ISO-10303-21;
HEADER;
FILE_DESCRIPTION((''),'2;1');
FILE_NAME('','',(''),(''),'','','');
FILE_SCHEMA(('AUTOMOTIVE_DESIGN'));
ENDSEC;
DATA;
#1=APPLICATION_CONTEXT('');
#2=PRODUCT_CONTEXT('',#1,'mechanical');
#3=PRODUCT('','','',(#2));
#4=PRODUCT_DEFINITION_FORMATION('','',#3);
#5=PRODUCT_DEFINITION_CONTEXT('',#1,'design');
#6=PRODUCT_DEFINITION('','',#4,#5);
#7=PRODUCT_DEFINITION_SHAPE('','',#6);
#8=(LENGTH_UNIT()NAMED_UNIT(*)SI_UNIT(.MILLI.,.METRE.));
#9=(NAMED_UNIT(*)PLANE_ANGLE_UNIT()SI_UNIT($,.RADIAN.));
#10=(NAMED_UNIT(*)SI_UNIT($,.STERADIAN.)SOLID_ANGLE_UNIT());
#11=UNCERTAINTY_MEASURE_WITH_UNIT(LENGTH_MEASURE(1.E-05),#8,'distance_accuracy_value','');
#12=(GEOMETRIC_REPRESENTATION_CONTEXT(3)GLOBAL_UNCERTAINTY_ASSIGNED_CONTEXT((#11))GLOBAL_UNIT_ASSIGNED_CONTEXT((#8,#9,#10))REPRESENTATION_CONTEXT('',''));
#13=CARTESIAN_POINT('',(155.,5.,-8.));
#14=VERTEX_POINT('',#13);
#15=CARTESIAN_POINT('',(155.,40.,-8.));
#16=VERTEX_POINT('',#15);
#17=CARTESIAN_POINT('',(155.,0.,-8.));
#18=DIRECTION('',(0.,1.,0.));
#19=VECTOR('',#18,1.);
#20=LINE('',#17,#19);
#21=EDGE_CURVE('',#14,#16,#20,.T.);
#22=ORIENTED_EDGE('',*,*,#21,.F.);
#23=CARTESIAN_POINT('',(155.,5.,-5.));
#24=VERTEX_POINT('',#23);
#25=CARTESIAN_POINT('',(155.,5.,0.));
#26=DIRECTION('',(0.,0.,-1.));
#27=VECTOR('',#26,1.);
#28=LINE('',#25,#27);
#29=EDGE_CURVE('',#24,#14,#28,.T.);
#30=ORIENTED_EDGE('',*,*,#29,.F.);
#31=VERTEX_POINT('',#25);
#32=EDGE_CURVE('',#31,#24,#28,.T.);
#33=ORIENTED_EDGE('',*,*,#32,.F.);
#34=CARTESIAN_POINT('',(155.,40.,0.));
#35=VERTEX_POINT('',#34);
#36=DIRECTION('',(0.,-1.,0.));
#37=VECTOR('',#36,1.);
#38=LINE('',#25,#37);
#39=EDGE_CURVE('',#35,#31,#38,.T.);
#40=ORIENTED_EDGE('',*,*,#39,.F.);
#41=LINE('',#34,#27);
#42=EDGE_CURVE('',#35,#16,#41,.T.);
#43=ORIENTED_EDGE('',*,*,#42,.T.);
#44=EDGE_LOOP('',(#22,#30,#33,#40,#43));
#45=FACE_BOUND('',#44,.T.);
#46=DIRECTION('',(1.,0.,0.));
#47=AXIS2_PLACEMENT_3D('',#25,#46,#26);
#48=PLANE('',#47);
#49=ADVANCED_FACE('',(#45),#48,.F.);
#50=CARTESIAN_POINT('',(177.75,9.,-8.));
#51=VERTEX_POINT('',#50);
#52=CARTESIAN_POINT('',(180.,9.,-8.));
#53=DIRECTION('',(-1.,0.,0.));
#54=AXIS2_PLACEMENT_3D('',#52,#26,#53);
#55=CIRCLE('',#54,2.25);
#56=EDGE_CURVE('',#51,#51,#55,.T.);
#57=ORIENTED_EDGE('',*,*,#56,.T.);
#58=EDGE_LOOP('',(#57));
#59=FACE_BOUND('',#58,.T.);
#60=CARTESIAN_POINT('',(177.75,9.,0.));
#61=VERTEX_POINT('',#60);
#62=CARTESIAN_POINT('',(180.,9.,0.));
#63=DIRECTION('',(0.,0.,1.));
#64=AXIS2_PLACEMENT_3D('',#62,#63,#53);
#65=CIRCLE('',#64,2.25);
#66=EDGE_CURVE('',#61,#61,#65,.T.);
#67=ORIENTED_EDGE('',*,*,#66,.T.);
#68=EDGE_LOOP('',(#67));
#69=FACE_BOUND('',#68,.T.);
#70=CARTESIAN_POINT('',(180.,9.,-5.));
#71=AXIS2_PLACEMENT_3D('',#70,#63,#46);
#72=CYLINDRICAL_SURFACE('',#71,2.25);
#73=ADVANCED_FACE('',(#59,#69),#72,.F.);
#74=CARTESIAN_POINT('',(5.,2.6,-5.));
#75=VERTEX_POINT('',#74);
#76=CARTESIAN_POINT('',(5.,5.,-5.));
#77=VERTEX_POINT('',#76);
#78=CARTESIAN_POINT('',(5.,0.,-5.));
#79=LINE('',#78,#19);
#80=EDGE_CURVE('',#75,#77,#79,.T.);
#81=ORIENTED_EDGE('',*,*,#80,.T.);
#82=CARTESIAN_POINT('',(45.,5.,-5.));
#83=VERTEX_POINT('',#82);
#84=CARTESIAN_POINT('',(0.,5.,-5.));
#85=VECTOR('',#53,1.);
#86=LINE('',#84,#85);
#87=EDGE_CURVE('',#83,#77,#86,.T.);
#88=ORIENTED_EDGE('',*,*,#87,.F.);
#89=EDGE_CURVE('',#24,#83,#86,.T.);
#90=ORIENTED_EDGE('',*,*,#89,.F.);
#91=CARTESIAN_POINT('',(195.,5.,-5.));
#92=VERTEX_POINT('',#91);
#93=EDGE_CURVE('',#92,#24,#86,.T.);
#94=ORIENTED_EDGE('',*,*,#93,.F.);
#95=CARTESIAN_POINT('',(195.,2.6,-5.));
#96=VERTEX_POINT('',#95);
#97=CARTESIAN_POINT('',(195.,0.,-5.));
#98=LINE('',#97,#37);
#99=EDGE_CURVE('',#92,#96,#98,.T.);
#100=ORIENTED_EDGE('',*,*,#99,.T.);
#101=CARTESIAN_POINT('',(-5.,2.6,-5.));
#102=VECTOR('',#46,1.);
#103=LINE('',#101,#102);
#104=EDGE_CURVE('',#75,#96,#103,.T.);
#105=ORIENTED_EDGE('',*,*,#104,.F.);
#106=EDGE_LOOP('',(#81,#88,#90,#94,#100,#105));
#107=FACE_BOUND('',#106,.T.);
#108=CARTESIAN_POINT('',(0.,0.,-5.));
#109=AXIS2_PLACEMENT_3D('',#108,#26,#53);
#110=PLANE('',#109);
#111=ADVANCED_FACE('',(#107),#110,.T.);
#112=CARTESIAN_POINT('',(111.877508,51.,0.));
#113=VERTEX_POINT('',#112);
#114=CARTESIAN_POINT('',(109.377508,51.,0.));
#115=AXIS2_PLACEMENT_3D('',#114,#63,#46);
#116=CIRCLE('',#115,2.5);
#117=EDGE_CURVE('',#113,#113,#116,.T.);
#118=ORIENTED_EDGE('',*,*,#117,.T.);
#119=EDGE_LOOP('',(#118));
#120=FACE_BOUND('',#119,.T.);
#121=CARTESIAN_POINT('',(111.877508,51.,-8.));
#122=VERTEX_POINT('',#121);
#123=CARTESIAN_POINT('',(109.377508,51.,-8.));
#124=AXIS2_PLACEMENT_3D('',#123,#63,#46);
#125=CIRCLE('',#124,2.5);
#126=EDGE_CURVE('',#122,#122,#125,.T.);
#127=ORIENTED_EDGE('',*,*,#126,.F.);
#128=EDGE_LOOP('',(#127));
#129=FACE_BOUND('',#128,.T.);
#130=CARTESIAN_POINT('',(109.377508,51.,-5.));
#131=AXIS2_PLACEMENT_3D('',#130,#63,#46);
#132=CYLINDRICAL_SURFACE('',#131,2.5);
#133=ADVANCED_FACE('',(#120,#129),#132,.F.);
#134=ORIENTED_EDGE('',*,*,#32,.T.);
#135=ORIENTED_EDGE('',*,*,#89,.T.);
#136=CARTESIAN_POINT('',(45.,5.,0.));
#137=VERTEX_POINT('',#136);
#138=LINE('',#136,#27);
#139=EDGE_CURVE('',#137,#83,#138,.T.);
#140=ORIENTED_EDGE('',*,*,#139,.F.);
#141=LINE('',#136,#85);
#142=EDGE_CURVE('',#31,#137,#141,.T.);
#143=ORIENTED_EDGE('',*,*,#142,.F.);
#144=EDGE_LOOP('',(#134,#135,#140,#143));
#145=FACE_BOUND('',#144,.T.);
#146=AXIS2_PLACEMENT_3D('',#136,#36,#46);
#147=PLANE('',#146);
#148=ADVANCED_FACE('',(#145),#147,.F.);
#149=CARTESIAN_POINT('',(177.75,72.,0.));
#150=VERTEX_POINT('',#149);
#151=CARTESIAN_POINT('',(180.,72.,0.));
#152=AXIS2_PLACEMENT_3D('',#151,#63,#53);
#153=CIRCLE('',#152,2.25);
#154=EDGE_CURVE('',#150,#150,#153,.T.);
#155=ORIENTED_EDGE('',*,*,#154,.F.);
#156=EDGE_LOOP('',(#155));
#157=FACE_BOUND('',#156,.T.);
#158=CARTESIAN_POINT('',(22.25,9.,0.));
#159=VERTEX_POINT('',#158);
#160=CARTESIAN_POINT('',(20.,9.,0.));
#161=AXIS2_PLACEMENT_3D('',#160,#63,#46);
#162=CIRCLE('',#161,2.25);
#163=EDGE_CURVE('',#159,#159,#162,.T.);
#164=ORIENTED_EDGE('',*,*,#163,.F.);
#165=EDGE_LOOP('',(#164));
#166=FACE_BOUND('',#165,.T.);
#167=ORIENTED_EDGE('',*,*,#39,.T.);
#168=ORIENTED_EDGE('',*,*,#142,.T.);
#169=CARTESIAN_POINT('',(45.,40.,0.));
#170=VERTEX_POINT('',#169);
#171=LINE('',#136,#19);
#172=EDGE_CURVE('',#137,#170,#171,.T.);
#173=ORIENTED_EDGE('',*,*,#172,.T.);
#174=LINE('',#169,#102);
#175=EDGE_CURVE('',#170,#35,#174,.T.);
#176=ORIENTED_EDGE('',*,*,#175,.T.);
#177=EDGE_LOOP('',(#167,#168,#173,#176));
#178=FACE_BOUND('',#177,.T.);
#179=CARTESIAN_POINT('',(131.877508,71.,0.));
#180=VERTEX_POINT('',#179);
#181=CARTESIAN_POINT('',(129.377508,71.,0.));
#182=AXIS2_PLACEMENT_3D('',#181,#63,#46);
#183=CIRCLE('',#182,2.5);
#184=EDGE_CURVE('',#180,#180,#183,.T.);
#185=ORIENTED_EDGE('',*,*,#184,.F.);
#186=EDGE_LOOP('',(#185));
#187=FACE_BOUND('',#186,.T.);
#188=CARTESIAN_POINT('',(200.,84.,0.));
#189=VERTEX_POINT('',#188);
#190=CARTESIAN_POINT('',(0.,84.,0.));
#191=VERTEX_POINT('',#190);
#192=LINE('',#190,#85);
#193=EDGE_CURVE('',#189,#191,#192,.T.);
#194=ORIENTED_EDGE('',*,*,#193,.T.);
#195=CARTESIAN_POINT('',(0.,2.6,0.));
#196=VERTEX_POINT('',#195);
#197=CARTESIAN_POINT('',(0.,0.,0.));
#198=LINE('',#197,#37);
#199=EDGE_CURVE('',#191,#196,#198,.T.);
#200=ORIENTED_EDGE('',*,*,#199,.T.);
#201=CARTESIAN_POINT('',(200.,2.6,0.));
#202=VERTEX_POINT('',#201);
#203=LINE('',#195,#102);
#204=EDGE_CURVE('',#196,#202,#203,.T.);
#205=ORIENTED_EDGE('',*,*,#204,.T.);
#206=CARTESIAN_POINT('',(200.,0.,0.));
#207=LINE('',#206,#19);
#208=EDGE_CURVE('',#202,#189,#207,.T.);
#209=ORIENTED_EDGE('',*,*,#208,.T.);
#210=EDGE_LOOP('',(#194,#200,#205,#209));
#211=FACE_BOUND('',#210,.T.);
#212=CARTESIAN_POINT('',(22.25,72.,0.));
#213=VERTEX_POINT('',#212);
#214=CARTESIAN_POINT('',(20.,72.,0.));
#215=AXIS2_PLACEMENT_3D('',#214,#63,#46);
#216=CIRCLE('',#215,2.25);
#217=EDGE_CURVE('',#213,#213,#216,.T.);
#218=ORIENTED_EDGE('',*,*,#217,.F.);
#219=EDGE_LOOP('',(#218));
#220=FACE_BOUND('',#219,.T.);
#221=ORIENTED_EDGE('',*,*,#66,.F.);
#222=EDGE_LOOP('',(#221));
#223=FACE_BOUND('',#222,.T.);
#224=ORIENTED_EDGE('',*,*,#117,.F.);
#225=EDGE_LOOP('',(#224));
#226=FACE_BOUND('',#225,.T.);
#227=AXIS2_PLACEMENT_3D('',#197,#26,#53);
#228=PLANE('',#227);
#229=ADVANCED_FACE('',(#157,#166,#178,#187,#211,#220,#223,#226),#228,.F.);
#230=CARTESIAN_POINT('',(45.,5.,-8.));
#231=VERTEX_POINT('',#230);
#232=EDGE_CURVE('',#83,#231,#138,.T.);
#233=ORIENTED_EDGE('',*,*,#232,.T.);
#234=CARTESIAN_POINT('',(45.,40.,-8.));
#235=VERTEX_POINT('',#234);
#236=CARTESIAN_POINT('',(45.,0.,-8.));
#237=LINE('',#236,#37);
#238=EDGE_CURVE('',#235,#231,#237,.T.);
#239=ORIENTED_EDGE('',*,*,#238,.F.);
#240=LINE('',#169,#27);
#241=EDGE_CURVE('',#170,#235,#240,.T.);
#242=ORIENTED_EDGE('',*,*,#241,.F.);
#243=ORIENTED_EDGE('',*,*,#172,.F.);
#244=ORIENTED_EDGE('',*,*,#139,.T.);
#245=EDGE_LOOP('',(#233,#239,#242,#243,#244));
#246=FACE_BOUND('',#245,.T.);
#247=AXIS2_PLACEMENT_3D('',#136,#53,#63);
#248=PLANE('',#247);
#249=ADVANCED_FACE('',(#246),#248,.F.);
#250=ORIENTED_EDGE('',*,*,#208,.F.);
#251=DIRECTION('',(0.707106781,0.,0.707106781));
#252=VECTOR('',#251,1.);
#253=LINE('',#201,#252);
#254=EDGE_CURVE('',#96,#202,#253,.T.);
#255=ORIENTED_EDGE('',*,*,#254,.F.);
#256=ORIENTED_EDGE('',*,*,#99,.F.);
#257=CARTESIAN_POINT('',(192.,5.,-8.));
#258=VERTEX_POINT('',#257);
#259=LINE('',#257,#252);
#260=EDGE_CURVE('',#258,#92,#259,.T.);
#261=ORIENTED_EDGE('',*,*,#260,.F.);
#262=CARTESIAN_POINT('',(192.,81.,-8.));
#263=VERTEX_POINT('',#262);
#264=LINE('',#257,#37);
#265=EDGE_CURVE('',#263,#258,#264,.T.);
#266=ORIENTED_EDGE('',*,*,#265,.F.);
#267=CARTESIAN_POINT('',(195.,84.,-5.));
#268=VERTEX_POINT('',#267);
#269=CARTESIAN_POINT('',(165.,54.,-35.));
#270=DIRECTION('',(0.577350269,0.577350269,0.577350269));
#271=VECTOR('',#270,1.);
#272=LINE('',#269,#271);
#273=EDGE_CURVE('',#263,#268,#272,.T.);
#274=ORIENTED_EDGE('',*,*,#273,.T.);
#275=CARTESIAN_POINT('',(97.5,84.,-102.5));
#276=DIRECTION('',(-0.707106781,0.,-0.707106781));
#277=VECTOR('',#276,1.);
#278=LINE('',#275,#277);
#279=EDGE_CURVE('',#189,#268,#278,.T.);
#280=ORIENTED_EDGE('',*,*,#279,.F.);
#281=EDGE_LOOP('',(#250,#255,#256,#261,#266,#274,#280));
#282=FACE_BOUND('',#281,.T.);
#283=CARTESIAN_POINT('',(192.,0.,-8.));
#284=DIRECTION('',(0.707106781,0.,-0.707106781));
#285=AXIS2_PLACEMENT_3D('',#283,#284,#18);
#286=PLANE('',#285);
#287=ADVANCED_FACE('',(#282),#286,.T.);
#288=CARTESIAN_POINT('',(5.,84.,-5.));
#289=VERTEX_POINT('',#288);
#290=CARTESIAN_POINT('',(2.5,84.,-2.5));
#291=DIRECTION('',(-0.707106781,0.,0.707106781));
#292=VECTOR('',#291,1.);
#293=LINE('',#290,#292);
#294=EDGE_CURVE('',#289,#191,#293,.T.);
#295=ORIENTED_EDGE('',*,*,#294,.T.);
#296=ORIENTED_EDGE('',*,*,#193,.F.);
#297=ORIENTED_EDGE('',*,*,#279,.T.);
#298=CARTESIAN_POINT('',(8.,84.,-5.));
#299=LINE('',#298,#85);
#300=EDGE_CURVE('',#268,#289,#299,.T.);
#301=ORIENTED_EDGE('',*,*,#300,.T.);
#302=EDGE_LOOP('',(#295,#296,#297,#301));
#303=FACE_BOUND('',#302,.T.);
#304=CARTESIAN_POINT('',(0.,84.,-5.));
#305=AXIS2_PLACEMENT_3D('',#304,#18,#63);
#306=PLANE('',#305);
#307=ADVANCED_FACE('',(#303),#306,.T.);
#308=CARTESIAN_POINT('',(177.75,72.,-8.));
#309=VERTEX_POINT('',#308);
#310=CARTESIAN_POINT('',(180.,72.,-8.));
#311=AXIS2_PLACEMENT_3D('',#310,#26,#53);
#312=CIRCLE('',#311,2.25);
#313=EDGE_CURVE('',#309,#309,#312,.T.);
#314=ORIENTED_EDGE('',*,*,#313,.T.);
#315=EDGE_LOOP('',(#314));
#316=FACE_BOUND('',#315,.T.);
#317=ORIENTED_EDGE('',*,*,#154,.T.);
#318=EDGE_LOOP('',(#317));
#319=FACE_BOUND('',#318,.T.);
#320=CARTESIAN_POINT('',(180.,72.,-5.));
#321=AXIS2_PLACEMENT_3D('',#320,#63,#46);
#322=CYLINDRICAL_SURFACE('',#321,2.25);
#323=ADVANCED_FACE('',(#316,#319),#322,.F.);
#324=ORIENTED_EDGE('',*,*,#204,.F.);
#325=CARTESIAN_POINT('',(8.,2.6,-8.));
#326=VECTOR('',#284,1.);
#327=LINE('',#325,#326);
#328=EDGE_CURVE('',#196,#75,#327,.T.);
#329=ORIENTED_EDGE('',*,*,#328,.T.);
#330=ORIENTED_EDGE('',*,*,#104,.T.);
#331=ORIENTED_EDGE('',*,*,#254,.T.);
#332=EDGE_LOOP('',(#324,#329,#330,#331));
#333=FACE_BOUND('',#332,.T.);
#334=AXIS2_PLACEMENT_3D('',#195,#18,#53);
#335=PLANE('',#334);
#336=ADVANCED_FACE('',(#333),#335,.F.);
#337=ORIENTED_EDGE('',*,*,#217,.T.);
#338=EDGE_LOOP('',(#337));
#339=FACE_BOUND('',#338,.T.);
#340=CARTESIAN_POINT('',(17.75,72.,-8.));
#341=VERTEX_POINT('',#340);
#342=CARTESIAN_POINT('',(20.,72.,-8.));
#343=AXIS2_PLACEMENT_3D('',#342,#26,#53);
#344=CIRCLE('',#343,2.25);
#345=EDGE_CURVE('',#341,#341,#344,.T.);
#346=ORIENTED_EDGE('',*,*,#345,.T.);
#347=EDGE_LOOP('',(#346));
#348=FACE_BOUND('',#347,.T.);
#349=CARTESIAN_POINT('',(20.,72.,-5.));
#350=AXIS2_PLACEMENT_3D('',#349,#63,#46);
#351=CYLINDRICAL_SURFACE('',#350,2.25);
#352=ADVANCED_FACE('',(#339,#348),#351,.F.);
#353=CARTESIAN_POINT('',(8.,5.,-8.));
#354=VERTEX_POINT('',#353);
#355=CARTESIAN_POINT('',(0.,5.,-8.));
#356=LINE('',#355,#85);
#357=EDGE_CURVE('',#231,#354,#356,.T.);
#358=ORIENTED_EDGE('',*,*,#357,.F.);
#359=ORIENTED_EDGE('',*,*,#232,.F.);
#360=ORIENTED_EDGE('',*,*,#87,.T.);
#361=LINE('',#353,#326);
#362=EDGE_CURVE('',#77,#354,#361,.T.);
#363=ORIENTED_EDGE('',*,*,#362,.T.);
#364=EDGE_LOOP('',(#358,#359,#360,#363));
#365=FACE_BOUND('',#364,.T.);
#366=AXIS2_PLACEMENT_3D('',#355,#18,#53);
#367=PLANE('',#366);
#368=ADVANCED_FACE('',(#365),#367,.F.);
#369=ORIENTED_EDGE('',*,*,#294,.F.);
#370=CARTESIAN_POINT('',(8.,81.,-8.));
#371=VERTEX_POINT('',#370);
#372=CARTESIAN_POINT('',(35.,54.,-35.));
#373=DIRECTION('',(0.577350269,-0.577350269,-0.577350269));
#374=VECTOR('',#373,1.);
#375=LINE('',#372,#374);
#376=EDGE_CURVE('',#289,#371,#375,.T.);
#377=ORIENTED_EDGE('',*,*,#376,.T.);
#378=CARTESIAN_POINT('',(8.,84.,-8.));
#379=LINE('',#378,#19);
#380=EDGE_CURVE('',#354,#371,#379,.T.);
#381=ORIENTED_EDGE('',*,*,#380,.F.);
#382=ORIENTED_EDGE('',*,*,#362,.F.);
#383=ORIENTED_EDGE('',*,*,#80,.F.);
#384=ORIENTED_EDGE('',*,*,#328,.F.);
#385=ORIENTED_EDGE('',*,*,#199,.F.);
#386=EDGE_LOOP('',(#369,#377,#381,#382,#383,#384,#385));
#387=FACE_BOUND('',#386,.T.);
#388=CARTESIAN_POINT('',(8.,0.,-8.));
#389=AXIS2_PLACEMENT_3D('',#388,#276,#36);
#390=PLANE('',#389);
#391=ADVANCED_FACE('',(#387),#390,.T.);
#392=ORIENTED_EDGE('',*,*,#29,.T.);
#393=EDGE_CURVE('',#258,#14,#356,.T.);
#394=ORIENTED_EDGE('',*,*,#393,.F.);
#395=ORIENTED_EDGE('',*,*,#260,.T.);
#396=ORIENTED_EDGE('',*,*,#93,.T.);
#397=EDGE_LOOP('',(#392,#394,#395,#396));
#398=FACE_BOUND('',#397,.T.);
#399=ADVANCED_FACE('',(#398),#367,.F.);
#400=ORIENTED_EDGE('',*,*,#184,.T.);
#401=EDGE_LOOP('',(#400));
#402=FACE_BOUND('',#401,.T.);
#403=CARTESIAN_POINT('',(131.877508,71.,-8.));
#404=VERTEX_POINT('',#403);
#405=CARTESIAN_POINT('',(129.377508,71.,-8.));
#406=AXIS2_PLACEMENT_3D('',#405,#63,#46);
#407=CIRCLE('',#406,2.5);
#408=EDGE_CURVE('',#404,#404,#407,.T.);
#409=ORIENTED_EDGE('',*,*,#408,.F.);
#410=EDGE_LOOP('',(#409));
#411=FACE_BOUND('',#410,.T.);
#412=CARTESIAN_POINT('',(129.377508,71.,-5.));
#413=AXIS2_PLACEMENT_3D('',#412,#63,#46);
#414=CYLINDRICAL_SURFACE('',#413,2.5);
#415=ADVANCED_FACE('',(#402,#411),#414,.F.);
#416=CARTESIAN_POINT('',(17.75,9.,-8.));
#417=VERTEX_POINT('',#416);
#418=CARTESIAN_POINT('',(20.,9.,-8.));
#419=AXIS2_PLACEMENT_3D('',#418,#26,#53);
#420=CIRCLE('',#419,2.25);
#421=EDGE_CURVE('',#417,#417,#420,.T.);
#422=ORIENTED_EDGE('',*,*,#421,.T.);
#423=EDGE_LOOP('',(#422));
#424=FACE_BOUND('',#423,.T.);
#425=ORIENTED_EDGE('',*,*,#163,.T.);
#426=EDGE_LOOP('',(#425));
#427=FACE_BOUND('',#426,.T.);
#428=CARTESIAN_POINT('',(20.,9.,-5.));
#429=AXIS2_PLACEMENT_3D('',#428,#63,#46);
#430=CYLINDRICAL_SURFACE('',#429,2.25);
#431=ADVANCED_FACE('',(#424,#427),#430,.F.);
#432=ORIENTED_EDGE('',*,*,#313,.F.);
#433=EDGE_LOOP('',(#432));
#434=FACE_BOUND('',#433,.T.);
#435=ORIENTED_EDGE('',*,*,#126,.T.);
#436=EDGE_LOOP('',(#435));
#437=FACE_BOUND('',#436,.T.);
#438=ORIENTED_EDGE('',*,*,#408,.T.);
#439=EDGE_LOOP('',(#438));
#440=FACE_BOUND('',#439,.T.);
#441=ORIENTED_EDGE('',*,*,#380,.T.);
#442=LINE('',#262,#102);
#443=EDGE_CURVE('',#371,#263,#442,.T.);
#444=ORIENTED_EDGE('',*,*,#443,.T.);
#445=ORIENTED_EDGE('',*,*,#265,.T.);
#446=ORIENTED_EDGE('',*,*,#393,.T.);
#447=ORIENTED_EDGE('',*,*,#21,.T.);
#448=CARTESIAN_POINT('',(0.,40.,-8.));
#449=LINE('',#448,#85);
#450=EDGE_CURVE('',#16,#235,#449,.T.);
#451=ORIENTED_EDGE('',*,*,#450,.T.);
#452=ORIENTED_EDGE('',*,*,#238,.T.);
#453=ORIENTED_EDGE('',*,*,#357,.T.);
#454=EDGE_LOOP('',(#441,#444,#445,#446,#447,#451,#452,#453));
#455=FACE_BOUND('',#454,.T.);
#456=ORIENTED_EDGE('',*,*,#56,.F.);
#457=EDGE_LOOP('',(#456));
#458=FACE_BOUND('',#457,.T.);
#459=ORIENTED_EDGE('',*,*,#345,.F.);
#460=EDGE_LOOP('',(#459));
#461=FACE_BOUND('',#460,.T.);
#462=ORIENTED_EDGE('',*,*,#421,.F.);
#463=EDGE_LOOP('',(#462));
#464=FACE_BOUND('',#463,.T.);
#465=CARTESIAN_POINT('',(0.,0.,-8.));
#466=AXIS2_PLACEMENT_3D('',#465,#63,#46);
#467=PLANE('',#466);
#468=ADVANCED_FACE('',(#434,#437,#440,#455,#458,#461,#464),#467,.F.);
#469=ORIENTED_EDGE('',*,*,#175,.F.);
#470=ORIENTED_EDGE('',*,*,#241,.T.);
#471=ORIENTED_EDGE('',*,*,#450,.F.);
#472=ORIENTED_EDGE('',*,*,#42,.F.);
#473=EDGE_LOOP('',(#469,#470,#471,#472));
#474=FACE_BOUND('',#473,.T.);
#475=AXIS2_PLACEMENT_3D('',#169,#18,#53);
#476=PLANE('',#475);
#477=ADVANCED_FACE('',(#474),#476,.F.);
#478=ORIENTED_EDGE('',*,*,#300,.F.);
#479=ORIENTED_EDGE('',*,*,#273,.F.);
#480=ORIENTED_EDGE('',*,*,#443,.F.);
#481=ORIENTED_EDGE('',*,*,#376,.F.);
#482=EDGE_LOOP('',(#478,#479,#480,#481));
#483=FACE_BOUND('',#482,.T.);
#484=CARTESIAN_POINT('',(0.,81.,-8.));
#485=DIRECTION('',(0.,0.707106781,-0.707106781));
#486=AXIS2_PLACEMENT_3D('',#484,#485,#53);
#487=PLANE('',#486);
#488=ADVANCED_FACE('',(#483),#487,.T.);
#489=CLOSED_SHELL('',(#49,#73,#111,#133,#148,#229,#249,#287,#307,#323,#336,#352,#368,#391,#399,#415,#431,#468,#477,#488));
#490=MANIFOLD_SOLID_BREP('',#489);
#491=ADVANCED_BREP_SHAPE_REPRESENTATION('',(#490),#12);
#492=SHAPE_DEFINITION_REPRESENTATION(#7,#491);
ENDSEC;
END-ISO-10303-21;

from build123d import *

# Parameters (mm, degrees)
SKETCH1_W               = 200
SKETCH1_H               = 84
SKETCH1_R               = 2.25
SKETCH1_R_2             = 2.5
BOSS_EXTRUDE1_DEPTH     = 5
SKETCH2_W               = 200
SKETCH2_H               = 79
SKETCH2_R               = 2.25
BOSS_EXTRUDE2_DEPTH     = 3
CHAMFER1_SIZE           = 8
CHAMFER3_SIZE           = 3
SKETCH3_W               = 7.071067812
SKETCH3_H               = 2.6
CUT_EXTRUDE1_DEPTH      = 234.034075139
SKETCH4_R               = 2.5
CUT_EXTRUDE2_DEPTH      = 218.071416819
CUT_EXTRUDE3_DEPTH      = 218.071416819
CUT_EXTRUDE3_DEPTH_BACK = 218.071416819
SKETCH6_W               = 110
SKETCH6_H               = 35


with BuildPart() as part:
    # Sketch1 → Boss-Extrude1 (new body)
    with BuildSketch(Plane.XY):
        with Locations((100, 42)):
            Rectangle(SKETCH1_W, SKETCH1_H)
        with Locations((20, 9)):
            Circle(SKETCH1_R, mode=Mode.SUBTRACT)
        with Locations(Location((180, 9, 0), (0, 0, 180))):
            Circle(SKETCH1_R, mode=Mode.SUBTRACT)
        with Locations((20, 72)):
            Circle(SKETCH1_R, mode=Mode.SUBTRACT)
        with Locations(Location((180, 72, 0), (0, 0, 180))):
            Circle(SKETCH1_R, mode=Mode.SUBTRACT)
        with Locations((109.377508284, 51)):
            Circle(SKETCH1_R_2, mode=Mode.SUBTRACT)
        with Locations((129.377508284, 71)):
            Circle(SKETCH1_R_2, mode=Mode.SUBTRACT)
    extrude(amount=-BOSS_EXTRUDE1_DEPTH)

    # Sketch2 → Boss-Extrude2 (add)
    with BuildSketch(Plane(origin=(0, 0, -5), x_dir=(-1, 0, 0), z_dir=(0, 0, -1))):
        with Locations((-100, 44.5)):
            Rectangle(SKETCH2_W, SKETCH2_H)
        with Locations(Location((-20, 9, 0), (0, 0, 180))):
            Circle(SKETCH2_R, mode=Mode.SUBTRACT)
        with Locations((-180, 9)):
            Circle(SKETCH2_R, mode=Mode.SUBTRACT)
        with Locations(Location((-20, 72, 0), (0, 0, 180))):
            Circle(SKETCH2_R, mode=Mode.SUBTRACT)
        with Locations((-180, 72)):
            Circle(SKETCH2_R, mode=Mode.SUBTRACT)
    extrude(amount=BOSS_EXTRUDE2_DEPTH)

    # Chamfer1
    # the kernel refuses this chamfer: 8 mm, written as the material it takes off along each edge
    with BuildSketch(Plane(origin=(200, -15.573463904, -8), x_dir=(-0.9996219169112968, 0, -0.027495876610586296), z_dir=(0, 1, 0)), Plane(origin=(0, 104.573463904, -8), x_dir=(0.9996219169112968, 0, -0.027495876610586275), z_dir=(0, -1, 0))) as chamfer1_piece_1:
        Polygon((CHAMFER1_SIZE * 0.999621916911, CHAMFER1_SIZE * 0.0274958766106), (-CHAMFER1_SIZE * 0.0274958766106, CHAMFER1_SIZE * 0.999621916911), (0, 0), align=None)
    extrude(amount=120.146927807, mode=Mode.SUBTRACT)

    # Chamfer3
    chamfer3_edges = [part.edges().sort_by_distance(p)[0] for p in [
        (100, 84, -8),
    ]]
    chamfer(chamfer3_edges, length=CHAMFER3_SIZE)

    # Sketch3 → Cut-Extrude1 (cut, through all, along a direction that is not the sketch's normal)
    with BuildSketch(Plane(origin=(100, 0, -100), x_dir=(-0.7071067811865452, 0, -0.7071067811865498), z_dir=(0.7071067811865498, 0, -0.7071067811865452))):
        with Locations((-137.885822331, 1.3)):
            Rectangle(SKETCH3_W, SKETCH3_H)
    extrude(amount=-CUT_EXTRUDE1_DEPTH, dir=(1, 0, 0), mode=Mode.SUBTRACT)

    # Sketch4 → Cut-Extrude2 (cut, through all)
    with BuildSketch(Plane.XY):
        with Locations((129.377508284, 71)):
            Circle(SKETCH4_R)
        with Locations((109.377508284, 51)):
            Circle(SKETCH4_R)
    extrude(amount=-CUT_EXTRUDE2_DEPTH, mode=Mode.SUBTRACT)

    # Sketch6 → Cut-Extrude3 (cut, two sides: drawn at the far end of the back side and taken through both)
    with BuildSketch(Plane(origin=(0, 0, -8), x_dir=(-1, 0, 0), z_dir=(0, 0, -1)).offset(-CUT_EXTRUDE3_DEPTH_BACK)):
        with Locations((-100, 22.5)):
            Rectangle(SKETCH6_W, SKETCH6_H)
    extrude(amount=CUT_EXTRUDE3_DEPTH + CUT_EXTRUDE3_DEPTH_BACK, mode=Mode.SUBTRACT)


solid = part.part
